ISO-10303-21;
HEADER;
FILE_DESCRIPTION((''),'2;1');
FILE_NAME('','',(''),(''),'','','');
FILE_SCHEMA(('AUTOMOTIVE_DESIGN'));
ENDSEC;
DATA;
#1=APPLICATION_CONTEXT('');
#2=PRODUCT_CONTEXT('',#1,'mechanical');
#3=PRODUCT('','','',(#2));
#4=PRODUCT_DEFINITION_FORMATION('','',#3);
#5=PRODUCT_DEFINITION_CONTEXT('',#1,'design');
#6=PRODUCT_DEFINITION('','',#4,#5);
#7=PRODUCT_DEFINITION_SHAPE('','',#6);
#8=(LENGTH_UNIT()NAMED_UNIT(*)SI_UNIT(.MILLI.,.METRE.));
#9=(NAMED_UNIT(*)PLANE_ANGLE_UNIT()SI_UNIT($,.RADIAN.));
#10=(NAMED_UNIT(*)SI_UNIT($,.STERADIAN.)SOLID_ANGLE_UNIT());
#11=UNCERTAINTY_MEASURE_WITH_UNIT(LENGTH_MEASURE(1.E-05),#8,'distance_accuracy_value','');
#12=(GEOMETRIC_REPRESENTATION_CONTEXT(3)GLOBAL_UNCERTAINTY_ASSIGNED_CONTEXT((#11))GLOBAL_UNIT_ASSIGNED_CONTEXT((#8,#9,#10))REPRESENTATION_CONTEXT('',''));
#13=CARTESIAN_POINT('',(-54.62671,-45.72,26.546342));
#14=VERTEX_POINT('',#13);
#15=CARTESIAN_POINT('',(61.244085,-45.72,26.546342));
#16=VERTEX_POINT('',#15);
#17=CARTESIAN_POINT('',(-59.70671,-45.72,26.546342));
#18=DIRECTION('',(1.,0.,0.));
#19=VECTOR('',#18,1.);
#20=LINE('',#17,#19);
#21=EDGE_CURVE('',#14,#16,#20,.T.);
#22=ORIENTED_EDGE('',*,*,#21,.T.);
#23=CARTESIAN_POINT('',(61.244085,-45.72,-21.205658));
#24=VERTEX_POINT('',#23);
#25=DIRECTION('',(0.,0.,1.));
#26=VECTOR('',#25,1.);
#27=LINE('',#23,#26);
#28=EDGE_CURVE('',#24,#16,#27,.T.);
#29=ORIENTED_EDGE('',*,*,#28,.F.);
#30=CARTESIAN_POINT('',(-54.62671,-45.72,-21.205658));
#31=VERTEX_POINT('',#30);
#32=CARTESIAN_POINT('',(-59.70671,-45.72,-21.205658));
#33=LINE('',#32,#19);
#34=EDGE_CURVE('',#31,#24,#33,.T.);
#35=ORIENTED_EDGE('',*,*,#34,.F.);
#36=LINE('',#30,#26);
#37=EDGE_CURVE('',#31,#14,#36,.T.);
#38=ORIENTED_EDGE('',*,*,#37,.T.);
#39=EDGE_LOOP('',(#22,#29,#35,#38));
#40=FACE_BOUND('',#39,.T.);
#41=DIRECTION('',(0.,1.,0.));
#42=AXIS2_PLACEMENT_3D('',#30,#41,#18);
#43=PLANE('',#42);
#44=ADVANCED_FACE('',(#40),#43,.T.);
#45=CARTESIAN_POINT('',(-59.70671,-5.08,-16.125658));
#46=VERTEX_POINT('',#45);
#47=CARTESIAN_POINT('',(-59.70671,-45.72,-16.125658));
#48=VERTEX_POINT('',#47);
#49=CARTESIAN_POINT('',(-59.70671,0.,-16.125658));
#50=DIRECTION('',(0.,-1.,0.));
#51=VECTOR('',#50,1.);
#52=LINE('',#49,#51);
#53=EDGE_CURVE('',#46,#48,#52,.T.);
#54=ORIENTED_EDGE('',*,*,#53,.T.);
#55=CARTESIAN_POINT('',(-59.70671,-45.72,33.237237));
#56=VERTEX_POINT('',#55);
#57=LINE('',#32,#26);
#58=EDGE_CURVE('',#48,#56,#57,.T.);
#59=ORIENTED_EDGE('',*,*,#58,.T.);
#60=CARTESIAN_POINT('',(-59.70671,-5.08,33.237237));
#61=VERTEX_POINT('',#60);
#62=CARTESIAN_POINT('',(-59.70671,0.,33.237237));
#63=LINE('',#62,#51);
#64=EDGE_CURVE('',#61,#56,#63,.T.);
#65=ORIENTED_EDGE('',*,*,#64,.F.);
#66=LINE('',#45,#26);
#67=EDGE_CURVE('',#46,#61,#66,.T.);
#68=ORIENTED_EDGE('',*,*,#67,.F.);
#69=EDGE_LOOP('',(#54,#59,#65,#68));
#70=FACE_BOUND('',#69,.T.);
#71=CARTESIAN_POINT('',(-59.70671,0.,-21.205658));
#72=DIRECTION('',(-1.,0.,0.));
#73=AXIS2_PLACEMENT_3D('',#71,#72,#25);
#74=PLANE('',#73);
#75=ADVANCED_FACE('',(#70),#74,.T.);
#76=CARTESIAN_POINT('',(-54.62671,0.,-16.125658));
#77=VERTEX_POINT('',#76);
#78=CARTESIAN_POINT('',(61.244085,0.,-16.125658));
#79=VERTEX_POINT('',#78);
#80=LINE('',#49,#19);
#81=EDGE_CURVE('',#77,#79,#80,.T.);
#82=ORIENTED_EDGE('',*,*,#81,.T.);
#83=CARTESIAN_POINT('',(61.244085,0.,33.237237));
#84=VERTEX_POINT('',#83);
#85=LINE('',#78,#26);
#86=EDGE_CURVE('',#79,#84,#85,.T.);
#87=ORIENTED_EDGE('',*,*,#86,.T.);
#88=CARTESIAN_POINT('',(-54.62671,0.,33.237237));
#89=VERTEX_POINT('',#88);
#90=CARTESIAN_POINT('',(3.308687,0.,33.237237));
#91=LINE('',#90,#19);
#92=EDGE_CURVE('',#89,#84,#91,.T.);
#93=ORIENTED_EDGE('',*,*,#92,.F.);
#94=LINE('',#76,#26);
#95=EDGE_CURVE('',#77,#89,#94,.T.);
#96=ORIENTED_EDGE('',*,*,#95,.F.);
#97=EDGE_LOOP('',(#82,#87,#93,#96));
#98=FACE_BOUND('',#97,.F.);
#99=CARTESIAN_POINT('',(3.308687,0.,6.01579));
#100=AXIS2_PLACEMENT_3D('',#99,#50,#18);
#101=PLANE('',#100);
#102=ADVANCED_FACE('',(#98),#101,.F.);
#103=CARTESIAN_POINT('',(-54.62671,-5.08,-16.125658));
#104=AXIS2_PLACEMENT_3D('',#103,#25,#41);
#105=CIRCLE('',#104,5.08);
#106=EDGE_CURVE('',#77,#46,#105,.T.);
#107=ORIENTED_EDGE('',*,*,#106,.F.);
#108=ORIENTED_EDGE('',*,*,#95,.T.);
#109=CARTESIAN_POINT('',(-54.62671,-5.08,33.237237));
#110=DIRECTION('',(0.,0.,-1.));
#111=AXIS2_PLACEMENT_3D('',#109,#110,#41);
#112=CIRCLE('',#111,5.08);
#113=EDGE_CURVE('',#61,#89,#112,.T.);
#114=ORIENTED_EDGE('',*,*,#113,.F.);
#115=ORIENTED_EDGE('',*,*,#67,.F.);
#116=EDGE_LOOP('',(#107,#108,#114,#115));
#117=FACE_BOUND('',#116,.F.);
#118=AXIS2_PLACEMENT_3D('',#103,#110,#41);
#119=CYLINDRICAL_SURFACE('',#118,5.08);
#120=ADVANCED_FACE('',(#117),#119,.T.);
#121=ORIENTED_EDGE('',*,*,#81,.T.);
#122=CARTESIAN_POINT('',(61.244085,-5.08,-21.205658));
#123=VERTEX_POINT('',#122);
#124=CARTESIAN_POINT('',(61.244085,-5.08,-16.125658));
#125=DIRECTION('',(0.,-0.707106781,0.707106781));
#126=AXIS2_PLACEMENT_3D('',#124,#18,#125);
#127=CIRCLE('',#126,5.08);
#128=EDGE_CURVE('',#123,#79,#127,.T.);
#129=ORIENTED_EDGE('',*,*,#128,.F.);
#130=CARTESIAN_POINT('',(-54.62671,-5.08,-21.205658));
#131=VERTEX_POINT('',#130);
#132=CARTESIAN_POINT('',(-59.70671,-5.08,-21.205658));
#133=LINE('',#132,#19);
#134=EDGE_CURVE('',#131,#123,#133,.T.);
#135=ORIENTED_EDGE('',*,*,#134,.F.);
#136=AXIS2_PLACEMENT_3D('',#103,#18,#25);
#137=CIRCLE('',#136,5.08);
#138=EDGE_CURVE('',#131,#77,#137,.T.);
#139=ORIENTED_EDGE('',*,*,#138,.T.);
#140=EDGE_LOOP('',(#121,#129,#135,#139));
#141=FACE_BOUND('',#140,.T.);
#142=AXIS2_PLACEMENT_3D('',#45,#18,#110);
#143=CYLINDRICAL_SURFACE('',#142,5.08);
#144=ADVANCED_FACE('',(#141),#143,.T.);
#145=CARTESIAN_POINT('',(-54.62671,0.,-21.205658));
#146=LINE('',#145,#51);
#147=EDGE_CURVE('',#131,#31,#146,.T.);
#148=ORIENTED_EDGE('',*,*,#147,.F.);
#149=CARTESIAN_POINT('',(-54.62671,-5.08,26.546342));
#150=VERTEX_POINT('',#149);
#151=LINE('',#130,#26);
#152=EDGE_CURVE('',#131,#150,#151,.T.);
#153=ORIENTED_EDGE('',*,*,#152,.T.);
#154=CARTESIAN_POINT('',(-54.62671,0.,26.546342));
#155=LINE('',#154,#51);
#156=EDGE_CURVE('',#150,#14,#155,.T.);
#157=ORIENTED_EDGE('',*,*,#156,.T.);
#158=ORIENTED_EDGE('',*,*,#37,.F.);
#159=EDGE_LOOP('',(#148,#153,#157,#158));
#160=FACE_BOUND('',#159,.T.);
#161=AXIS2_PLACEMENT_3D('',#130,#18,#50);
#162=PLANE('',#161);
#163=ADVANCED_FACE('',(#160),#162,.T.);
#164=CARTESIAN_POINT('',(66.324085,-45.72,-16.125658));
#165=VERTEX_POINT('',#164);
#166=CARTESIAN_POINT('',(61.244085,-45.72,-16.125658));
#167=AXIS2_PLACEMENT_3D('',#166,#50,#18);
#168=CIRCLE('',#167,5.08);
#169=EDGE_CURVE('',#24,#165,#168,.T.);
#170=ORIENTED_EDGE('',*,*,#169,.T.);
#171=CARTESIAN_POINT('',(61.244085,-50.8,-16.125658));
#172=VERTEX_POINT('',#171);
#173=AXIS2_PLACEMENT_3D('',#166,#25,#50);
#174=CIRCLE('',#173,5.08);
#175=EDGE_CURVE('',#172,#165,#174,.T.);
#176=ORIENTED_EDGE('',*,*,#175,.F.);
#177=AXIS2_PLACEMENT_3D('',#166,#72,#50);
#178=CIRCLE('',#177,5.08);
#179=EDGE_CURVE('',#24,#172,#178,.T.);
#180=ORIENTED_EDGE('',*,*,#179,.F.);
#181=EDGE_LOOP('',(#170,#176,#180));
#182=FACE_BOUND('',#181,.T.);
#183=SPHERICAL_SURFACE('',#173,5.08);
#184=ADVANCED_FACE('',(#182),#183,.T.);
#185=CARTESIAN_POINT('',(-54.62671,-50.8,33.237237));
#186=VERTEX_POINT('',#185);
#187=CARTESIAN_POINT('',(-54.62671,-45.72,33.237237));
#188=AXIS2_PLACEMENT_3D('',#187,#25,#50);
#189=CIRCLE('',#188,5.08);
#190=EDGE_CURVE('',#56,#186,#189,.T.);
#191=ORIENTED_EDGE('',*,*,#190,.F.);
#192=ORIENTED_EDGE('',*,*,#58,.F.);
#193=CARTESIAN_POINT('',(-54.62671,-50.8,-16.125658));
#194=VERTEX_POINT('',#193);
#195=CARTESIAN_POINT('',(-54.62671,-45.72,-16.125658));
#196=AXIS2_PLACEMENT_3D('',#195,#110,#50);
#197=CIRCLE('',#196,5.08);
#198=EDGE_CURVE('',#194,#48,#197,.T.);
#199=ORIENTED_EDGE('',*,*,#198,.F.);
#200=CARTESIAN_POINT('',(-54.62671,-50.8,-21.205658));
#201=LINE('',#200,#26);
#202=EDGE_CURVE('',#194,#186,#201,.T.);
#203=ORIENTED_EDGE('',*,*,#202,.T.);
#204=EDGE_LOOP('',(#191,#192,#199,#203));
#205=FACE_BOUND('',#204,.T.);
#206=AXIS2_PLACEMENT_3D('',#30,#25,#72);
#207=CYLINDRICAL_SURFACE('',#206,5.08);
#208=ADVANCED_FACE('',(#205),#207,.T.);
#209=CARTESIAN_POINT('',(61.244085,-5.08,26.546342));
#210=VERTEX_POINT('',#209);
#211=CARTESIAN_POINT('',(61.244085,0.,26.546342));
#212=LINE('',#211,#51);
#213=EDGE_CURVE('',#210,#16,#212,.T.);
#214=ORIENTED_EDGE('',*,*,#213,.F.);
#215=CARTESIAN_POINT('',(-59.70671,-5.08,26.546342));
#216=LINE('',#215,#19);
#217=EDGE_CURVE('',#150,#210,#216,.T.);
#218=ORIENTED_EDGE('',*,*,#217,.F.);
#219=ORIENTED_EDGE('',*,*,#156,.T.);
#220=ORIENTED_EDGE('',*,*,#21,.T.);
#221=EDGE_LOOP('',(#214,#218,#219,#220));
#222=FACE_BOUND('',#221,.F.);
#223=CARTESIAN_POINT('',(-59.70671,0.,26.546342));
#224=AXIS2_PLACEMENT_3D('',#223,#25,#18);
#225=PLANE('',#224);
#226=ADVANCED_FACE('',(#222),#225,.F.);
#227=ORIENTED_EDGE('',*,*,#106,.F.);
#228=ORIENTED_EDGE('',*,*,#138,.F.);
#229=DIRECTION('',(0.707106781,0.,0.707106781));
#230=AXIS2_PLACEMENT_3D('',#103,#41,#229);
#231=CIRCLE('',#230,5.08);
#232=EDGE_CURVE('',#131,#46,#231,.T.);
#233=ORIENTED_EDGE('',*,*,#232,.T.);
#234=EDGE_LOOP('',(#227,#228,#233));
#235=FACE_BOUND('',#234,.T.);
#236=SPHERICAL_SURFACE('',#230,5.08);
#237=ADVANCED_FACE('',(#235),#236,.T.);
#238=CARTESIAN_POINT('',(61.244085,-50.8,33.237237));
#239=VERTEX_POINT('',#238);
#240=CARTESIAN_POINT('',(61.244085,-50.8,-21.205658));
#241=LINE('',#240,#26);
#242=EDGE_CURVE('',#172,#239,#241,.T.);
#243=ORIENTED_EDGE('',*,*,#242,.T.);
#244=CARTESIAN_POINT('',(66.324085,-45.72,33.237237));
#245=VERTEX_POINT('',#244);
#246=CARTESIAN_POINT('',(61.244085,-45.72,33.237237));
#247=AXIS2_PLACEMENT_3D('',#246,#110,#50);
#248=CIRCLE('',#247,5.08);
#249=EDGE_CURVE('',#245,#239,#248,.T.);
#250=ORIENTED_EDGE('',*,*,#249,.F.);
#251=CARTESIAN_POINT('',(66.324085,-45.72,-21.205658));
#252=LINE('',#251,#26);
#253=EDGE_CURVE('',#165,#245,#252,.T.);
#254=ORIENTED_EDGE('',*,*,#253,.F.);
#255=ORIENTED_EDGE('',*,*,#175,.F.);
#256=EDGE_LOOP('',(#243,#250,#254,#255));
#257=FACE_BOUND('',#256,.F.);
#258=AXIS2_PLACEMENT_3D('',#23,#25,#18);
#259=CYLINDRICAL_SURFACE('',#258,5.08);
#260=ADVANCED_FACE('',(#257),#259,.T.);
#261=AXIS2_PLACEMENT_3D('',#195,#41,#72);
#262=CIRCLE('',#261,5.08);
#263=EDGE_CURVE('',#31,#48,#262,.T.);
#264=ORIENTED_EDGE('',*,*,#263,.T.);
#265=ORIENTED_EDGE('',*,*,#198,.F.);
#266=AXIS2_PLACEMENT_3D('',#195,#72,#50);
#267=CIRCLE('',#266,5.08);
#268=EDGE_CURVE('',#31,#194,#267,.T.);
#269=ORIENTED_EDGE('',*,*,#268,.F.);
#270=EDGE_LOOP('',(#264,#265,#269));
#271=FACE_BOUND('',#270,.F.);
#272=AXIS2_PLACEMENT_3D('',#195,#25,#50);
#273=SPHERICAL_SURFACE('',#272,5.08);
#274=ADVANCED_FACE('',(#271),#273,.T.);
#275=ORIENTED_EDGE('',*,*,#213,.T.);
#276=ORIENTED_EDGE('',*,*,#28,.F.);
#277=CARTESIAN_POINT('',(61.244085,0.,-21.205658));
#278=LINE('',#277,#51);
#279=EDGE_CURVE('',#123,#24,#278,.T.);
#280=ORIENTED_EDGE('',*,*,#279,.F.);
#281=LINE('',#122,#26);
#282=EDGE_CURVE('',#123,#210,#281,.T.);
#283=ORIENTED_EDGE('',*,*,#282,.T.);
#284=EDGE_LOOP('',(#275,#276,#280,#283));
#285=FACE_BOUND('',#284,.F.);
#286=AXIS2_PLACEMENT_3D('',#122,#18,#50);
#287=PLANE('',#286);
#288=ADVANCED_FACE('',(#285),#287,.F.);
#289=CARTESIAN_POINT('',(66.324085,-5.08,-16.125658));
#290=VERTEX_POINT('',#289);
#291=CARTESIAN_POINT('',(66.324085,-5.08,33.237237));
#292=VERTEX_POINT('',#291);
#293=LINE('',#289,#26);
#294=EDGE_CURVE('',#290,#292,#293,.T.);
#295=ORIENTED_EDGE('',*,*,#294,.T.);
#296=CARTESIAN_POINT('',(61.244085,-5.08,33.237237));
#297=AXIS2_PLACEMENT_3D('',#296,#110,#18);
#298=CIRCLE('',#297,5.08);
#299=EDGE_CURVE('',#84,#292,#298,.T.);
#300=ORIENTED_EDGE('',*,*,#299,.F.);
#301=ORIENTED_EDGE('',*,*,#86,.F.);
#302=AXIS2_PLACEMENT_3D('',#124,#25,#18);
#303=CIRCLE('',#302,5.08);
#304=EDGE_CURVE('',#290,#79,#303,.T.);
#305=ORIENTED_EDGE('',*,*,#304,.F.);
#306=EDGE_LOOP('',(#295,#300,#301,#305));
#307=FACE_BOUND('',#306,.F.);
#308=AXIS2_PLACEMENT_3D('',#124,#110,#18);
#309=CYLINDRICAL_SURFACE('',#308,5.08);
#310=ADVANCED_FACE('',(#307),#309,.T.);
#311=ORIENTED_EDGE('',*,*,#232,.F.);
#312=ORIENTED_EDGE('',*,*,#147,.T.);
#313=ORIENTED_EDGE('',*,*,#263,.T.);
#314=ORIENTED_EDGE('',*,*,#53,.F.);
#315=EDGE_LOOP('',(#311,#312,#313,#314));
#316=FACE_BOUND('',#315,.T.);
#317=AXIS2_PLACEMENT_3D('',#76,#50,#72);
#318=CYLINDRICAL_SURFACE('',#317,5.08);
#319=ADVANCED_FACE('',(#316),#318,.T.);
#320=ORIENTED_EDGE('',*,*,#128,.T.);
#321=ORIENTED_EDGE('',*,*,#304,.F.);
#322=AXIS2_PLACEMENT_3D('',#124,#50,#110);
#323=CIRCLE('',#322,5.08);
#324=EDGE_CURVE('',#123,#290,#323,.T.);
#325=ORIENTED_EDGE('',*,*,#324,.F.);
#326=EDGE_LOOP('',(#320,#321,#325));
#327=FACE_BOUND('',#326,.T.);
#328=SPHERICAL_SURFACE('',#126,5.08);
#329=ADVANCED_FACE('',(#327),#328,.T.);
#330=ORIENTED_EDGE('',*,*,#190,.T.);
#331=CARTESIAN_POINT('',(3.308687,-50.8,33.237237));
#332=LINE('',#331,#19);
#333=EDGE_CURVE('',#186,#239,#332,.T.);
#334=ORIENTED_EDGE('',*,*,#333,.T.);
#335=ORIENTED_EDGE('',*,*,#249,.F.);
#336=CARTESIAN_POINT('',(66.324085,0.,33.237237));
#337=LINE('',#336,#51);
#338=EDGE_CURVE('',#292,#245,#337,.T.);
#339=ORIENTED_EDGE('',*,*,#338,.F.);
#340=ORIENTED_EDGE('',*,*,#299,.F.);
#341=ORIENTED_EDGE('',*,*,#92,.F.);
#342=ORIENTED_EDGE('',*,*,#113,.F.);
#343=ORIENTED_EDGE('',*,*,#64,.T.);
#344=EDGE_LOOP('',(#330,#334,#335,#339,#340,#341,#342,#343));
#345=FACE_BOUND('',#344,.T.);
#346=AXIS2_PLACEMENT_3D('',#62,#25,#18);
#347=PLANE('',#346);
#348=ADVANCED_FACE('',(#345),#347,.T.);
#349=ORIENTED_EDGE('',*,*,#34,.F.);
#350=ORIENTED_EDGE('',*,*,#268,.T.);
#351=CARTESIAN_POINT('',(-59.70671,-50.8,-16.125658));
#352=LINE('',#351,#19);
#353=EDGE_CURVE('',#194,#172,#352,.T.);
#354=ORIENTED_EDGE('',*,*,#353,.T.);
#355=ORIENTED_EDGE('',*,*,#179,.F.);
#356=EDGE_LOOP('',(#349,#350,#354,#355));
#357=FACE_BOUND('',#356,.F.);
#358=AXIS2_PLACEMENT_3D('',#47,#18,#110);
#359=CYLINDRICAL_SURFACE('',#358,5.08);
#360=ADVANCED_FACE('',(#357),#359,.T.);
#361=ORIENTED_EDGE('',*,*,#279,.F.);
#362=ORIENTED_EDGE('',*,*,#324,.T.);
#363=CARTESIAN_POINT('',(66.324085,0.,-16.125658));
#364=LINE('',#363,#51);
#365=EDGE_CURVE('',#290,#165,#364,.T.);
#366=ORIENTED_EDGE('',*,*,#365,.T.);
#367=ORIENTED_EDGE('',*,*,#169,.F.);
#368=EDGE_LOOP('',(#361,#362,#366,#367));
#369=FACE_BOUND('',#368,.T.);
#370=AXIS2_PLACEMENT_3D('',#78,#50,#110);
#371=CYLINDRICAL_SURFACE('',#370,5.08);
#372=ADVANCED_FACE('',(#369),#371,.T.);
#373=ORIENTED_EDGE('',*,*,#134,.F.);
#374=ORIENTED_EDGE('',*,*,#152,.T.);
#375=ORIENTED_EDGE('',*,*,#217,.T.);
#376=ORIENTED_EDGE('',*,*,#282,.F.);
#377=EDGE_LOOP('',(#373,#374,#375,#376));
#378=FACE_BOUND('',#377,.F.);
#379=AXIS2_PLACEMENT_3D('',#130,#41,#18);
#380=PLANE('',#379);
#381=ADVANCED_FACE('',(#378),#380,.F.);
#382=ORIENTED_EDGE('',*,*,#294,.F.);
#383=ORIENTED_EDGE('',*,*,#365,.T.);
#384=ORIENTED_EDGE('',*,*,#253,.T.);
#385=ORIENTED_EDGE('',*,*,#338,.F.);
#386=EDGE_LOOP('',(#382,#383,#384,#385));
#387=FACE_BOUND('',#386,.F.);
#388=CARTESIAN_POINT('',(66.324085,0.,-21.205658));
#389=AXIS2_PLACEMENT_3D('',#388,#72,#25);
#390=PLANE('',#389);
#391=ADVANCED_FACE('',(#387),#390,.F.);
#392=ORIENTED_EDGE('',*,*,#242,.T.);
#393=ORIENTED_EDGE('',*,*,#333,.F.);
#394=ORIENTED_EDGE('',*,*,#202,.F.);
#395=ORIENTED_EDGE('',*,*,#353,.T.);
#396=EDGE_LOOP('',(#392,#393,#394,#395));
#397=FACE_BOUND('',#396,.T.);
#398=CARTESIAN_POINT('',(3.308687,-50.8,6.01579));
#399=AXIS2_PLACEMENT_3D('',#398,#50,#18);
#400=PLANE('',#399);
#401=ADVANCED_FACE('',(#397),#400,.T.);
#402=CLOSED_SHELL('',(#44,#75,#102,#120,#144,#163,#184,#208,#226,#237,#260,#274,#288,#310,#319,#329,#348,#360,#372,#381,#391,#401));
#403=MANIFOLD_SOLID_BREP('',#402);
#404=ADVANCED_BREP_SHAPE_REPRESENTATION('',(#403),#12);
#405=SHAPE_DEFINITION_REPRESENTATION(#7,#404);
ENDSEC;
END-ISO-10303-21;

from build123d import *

# Parameters (mm, degrees)
F0_W         = 126.0307952762
F0_H         = 54.4428955764
F1_DEPTH     = 50.8
F2_R         = 5.08
F3_T1_DEPTH  = 62.0628955764
F3_S5_W      = 5.08
F3_S5_H      = 5.08
F3_T6_DEPTH  = 5.08
F3_S11_W     = 5.08
F3_S11_H     = 5.08
F3_T12_DEPTH = 5.08
F4_DEPTH     = 47.752


# Not quite as in the source:
# - a fillet or chamfer that OpenCascade refuses, or shapes differently, is made with other operations: its cross-section is extruded or revolved along the edge and cut away or added


with BuildPart() as f1:
    # F0 (on Front) → F1 (new body)
    with BuildSketch(Plane.XZ):
        with Locations((3.3086873591, 6.0157896951)):
            Rectangle(F0_W, F0_H)
    extrude(amount=F1_DEPTH)

    # F2
    f2_edges = [f1.edges().sort_by_distance(p)[0] for p in [
        (66.324085, -50.8, 6.01579),
        (-59.70671, -50.8, 6.01579),
        (3.308687, -50.8, -21.205658),
        (-59.70671, -25.4, -21.205658),
        (66.324085, -25.4, -21.205658),
        (3.308687, 0, -21.205658),
    ]]
    fillet(f2_edges, radius=F2_R)

    # F3: fillet of radius 5.08 on 2 edges, made by hand

    # F3_s2 → F3_t1 (cut)
    with BuildSketch(Plane.XY.offset(-16.1256580931)):
        with BuildLine():
            ThreePointArc((66.3240849972, -5.08), (64.8361874456, -1.4878975516), (61.2440849972, 0))
            Line((61.2440849972, 0), (66.3240849972, 0))
            Line((66.3240849972, 0), (66.3240849972, -5.08))
        make_face()
        with BuildLine():
            ThreePointArc((-54.626710279, 0), (-58.2188127274, -1.4878975516), (-59.706710279, -5.08))
            Line((-59.706710279, -5.08), (-59.706710279, 0))
            Line((-59.706710279, 0), (-54.626710279, 0))
        make_face()
    extrude(amount=F3_T1_DEPTH, mode=Mode.SUBTRACT)


with BuildPart() as f3_tool4:
    # F3_s5 → F3_t6 (new body)
    with BuildSketch(Plane.XZ.offset(5.08)):
        with Locations((-57.166710279, -18.6656580931)):
            Rectangle(F3_S5_W, F3_S5_H)
    extrude(amount=-F3_T6_DEPTH)

    # F3_s7 → F3_t8 (revolve, cut)
    with BuildSketch(Plane(origin=(-54.626710279, -5.08, -16.1256580931), x_dir=(0.7071067812, 0, 0.7071067812), z_dir=(-0.7071067812, 0, 0.7071067812))):
        with BuildLine():
            ThreePointArc((0, -5.08), (5.08, 0), (0, 5.08))
            Line((0, 5.08), (0, -5.08))
        make_face()
    revolve(axis=Axis((-54.626710279, -5.08, -16.1256580931), (0, 1, 0)), mode=Mode.SUBTRACT)


with BuildPart() as f1_1:
    add(f1.part)

    # F3_t3: cut F3_tool4
    add(f3_tool4.part, mode=Mode.SUBTRACT)


with BuildPart() as f3_tool10:
    # F3_s11 → F3_t12 (new body)
    with BuildSketch(Plane.YZ.offset(61.2440849972)):
        with Locations((-2.54, -18.6656580931)):
            Rectangle(F3_S11_W, F3_S11_H)
    extrude(amount=F3_T12_DEPTH)

    # F3_s13 → F3_t14 (revolve, cut)
    with BuildSketch(Plane(origin=(61.2440849972, -5.08, -16.1256580931), x_dir=(0, -0.7071067812, 0.7071067812), z_dir=(0, 0.7071067812, 0.7071067812))):
        with BuildLine():
            ThreePointArc((0, -5.08), (5.08, 0), (0, 5.08))
            Line((0, 5.08), (0, -5.08))
        make_face()
    revolve(axis=Axis((61.2440849972, -5.08, -16.1256580931), (1, 0, 0)), mode=Mode.SUBTRACT)


with BuildPart() as f1_2:
    add(f1_1.part)

    # F3_t9: cut F3_tool10
    add(f3_tool10.part, mode=Mode.SUBTRACT)

    # F4 (cut): a face of the model
    f4_faces = [f1_2.faces().sort_by_distance(p)[0] for p in [
        (3.3086873591, -25.4, -21.2056580931),
    ]]
    extrude(f4_faces, amount=-F4_DEPTH, mode=Mode.SUBTRACT)


solid = f1_2.part
